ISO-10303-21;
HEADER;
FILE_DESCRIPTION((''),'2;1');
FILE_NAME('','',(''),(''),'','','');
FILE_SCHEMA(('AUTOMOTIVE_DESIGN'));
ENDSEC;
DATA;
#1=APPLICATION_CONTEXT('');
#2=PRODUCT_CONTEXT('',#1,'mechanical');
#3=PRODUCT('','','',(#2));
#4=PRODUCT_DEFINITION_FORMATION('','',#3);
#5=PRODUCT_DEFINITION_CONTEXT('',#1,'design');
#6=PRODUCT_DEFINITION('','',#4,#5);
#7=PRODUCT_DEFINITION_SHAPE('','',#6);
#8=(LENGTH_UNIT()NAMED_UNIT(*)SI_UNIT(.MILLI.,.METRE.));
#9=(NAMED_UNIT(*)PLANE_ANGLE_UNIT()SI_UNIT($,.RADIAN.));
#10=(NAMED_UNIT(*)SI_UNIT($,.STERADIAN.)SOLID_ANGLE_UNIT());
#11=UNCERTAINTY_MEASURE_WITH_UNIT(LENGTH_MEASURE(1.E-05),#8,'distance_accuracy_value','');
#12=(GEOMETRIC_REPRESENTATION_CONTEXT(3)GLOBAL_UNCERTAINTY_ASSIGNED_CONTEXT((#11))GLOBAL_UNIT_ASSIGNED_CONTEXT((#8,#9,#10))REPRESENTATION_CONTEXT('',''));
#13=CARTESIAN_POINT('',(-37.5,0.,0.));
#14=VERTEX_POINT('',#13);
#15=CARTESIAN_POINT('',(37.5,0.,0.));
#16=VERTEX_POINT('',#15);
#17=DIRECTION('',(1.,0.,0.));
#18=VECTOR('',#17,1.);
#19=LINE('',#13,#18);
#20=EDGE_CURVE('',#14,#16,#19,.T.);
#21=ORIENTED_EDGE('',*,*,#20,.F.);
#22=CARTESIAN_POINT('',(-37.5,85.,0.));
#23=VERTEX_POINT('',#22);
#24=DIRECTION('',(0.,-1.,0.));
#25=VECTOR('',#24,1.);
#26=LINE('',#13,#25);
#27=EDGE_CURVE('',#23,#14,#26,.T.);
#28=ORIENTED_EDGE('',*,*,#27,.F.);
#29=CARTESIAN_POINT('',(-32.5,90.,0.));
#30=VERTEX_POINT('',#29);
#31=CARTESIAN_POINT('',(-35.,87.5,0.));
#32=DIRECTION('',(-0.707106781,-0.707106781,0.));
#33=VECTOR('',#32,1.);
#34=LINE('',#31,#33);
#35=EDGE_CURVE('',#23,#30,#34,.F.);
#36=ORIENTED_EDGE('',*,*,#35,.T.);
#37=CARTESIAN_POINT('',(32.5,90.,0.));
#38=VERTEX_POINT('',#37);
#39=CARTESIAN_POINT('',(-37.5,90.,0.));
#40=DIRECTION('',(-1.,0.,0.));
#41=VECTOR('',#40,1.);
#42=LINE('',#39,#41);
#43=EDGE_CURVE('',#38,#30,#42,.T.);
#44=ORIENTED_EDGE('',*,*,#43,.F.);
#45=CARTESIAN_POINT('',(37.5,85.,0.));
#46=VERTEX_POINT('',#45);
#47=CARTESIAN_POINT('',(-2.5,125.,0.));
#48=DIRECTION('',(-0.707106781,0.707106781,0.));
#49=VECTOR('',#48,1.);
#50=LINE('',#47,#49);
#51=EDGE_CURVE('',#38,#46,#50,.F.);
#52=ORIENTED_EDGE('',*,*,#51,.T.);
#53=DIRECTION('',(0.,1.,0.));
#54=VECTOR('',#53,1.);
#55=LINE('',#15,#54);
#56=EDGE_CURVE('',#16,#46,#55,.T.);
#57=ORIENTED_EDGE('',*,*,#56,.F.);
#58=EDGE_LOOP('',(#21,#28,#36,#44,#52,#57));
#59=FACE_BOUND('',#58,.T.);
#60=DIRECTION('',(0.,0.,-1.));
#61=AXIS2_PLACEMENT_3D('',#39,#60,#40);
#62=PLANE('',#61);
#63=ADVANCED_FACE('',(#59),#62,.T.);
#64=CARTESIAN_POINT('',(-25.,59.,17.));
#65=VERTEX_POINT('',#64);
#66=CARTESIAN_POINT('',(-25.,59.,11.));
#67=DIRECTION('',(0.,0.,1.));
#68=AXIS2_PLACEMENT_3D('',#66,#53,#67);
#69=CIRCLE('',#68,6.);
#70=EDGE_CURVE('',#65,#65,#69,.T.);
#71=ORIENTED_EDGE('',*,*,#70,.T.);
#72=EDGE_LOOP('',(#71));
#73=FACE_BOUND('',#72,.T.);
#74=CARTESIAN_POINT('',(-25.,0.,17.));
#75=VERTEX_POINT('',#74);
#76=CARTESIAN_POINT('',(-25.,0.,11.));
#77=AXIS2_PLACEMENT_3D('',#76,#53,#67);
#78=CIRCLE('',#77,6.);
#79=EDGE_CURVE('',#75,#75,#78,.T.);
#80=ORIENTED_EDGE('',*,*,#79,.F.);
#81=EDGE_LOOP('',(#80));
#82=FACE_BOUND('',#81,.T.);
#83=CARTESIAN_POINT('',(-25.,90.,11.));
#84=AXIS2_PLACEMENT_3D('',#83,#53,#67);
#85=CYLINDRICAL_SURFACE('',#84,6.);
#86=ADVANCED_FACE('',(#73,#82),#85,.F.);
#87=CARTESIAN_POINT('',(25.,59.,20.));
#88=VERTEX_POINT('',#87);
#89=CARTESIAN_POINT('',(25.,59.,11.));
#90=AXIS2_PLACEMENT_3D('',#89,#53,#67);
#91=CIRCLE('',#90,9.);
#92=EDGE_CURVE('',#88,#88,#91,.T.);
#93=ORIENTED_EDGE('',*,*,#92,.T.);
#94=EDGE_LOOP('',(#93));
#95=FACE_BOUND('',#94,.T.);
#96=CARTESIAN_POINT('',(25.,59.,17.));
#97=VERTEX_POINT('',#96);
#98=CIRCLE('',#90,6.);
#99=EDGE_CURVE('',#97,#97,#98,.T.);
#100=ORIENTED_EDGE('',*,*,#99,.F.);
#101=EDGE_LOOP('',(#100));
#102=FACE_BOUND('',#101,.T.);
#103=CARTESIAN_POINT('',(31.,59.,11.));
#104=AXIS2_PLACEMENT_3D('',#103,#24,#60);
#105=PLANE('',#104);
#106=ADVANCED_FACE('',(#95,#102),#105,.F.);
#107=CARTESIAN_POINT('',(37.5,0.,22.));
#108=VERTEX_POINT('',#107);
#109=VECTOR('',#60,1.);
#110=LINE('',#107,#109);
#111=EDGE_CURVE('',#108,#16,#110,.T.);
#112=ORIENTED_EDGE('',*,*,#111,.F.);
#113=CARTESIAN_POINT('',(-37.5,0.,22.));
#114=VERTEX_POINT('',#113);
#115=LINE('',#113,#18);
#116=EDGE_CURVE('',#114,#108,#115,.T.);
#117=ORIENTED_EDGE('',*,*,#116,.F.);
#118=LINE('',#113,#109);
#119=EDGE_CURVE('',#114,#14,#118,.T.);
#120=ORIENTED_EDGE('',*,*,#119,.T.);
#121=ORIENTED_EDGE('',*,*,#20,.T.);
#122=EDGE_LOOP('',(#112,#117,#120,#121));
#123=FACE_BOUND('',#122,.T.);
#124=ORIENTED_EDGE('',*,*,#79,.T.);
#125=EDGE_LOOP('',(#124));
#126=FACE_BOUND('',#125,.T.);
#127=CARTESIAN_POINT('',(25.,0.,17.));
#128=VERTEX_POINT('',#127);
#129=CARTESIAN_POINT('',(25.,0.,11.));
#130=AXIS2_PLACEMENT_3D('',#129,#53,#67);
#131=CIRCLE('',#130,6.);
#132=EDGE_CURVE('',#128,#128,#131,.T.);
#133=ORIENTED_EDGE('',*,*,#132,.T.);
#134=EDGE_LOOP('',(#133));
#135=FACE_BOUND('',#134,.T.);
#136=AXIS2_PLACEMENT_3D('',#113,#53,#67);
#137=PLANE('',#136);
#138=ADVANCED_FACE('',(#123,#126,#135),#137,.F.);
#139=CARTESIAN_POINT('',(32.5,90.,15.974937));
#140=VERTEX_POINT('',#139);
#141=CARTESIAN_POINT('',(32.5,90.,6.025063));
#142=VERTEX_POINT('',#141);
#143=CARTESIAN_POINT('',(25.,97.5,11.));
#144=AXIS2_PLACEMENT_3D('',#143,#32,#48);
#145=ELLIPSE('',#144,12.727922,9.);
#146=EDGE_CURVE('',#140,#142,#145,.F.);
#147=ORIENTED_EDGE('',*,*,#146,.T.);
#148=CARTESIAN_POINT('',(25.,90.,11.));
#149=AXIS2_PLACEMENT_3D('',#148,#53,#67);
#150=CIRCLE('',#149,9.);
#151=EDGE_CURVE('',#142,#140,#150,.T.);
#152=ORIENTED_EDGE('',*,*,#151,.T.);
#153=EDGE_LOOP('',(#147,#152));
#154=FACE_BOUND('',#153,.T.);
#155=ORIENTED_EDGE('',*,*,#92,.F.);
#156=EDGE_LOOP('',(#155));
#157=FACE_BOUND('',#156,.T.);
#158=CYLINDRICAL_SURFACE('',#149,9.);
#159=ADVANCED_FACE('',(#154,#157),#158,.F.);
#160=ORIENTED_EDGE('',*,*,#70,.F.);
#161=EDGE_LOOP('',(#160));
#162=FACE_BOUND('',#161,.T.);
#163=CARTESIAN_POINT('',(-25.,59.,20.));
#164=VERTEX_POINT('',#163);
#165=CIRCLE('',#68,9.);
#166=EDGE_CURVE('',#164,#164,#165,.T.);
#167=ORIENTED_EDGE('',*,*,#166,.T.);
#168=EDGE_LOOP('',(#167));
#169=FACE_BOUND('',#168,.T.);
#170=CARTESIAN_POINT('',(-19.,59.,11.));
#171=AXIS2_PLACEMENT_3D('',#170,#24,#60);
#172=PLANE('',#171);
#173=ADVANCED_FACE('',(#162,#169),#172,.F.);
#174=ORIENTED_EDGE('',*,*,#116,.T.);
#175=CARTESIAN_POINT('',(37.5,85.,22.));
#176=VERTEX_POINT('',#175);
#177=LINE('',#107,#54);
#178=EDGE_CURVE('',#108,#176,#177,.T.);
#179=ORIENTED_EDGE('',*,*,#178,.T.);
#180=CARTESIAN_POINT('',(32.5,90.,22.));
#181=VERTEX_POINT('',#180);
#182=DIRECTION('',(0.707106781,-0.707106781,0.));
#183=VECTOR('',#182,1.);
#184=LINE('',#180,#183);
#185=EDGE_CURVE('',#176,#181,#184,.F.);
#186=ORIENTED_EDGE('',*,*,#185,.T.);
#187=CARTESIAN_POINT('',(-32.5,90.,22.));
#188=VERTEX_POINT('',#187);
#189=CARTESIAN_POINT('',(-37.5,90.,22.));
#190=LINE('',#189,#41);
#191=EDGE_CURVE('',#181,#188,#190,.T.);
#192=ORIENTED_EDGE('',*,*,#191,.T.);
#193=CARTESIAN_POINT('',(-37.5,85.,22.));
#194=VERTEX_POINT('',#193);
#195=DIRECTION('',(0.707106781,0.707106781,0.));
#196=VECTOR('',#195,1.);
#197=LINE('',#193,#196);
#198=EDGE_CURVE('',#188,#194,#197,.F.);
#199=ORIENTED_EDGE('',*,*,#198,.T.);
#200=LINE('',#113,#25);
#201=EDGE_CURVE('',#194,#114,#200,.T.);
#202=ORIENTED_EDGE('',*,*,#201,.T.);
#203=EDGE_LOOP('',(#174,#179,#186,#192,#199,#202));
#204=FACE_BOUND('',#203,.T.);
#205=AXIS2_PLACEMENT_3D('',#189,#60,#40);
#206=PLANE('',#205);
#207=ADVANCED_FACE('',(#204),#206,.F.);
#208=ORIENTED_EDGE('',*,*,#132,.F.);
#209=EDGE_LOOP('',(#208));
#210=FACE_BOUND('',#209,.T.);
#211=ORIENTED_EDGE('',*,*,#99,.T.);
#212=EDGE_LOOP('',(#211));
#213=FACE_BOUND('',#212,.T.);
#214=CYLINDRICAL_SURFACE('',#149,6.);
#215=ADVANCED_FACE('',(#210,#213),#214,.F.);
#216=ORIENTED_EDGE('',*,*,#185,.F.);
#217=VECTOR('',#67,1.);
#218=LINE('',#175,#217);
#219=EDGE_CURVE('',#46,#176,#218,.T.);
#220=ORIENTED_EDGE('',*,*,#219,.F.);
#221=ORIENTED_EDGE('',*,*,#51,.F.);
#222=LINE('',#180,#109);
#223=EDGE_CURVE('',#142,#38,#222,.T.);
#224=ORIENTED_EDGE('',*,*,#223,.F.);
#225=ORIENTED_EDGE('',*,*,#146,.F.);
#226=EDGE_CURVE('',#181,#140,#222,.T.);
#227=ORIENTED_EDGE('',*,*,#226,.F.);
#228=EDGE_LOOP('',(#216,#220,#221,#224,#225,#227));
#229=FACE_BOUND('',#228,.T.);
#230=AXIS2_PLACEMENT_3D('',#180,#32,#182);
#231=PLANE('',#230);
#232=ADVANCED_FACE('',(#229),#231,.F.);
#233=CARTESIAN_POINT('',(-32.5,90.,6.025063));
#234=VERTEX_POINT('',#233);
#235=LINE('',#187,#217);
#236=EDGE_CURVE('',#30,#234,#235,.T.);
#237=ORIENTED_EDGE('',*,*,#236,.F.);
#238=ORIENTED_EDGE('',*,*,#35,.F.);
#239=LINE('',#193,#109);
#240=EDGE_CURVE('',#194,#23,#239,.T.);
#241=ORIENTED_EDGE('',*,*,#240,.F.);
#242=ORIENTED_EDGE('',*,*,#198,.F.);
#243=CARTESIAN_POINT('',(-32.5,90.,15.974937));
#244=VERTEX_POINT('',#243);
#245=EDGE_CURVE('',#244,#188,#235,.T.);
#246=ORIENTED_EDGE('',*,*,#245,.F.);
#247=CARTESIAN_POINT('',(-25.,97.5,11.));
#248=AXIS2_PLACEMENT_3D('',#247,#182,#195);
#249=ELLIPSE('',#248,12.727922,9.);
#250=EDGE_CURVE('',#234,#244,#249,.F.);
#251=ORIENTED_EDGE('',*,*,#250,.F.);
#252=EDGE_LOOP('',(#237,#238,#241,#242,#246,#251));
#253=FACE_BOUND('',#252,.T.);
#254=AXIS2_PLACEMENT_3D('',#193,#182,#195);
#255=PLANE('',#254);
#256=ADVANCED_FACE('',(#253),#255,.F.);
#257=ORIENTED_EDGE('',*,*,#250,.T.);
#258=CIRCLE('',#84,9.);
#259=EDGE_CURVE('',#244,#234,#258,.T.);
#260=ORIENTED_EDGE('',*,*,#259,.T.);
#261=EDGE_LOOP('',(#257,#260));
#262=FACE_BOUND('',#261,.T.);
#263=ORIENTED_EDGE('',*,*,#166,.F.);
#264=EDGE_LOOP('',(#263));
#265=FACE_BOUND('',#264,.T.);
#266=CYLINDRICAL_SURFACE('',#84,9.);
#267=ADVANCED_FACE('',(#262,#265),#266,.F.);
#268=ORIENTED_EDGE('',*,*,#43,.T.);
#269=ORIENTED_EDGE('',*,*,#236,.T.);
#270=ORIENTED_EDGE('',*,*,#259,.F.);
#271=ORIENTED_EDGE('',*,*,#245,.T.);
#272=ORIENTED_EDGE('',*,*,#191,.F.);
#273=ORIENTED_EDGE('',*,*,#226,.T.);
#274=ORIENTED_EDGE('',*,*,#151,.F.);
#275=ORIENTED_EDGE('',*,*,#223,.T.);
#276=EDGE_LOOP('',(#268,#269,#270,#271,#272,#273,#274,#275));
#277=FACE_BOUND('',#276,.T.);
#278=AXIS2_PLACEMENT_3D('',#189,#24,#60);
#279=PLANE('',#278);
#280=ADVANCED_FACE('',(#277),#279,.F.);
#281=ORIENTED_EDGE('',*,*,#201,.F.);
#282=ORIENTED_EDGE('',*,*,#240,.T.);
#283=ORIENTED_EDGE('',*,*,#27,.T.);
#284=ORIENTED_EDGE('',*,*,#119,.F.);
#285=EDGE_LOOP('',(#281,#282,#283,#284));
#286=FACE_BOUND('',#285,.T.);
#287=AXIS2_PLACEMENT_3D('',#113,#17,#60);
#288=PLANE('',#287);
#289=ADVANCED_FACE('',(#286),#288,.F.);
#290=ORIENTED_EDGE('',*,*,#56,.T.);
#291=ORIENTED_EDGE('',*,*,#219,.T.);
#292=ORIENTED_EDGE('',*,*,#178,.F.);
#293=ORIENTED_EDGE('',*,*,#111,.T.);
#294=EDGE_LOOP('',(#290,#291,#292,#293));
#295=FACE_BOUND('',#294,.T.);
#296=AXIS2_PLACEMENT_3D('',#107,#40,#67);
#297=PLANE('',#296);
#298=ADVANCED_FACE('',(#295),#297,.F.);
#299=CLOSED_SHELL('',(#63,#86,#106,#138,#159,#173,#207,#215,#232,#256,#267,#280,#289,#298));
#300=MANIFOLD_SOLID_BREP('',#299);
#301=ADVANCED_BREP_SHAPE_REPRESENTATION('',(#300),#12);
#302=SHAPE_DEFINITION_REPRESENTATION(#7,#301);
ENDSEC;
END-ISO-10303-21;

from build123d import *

# Parameters (mm, degrees)
SKETCH1_W                                        = 75
SKETCH1_H                                        = 90
BOSS_EXTRUDE1_DEPTH                              = 22
CBORE_FOR_M10_SOCKET_HEAD_CAP_SCREW1_D           = 12
CBORE_FOR_M10_SOCKET_HEAD_CAP_SCREW1_CBORE_D     = 18
CBORE_FOR_M10_SOCKET_HEAD_CAP_SCREW1_CBORE_DEPTH = 31
CHAMFER1_SIZE                                    = 5


with BuildPart() as part:
    # Sketch1 → Boss-Extrude1 (new body)
    with BuildSketch(Plane.XY):
        with Locations((0, 45)):
            Rectangle(SKETCH1_W, SKETCH1_H)
    extrude(amount=BOSS_EXTRUDE1_DEPTH)

    # CBORE for M10 Socket Head Cap Screw1 (through all)
    with Locations(Plane(origin=(0, 90, 0), x_dir=(-1, 0, 0), z_dir=(0, 1, 0))):
        with Locations((25, 11), (-25, 11)):
            CounterBoreHole(CBORE_FOR_M10_SOCKET_HEAD_CAP_SCREW1_D / 2, CBORE_FOR_M10_SOCKET_HEAD_CAP_SCREW1_CBORE_D / 2, CBORE_FOR_M10_SOCKET_HEAD_CAP_SCREW1_CBORE_DEPTH)

    # Chamfer1
    # the kernel refuses this chamfer: 5 mm, written as the material it takes off along each edge
    with BuildSketch(Plane(origin=(-37.5, 90, -12.85841494), x_dir=(-0.027495876610586282, -0.9996219169112968, 0), z_dir=(0, 0, 1))) as chamfer1_piece_1:
        Polygon((CHAMFER1_SIZE * 0.999621916911, CHAMFER1_SIZE * 0.0274958766106), (-CHAMFER1_SIZE * 0.0274958766106, CHAMFER1_SIZE * 0.999621916911), (0, 0), align=None)
    extrude(amount=47.71682988, mode=Mode.SUBTRACT)
    with BuildSketch(Plane(origin=(37.5, 90, -12.85841494), x_dir=(0.027495876610586282, -0.9996219169112968, 0), z_dir=(0, 0, 1))) as chamfer1_piece_2:
        Polygon((CHAMFER1_SIZE * 0.999621916911, -CHAMFER1_SIZE * 0.0274958766106), (-CHAMFER1_SIZE * 0.0274958766106, -CHAMFER1_SIZE * 0.999621916911), (0, 0), align=None)
    extrude(amount=47.71682988, mode=Mode.SUBTRACT)


solid = part.part
